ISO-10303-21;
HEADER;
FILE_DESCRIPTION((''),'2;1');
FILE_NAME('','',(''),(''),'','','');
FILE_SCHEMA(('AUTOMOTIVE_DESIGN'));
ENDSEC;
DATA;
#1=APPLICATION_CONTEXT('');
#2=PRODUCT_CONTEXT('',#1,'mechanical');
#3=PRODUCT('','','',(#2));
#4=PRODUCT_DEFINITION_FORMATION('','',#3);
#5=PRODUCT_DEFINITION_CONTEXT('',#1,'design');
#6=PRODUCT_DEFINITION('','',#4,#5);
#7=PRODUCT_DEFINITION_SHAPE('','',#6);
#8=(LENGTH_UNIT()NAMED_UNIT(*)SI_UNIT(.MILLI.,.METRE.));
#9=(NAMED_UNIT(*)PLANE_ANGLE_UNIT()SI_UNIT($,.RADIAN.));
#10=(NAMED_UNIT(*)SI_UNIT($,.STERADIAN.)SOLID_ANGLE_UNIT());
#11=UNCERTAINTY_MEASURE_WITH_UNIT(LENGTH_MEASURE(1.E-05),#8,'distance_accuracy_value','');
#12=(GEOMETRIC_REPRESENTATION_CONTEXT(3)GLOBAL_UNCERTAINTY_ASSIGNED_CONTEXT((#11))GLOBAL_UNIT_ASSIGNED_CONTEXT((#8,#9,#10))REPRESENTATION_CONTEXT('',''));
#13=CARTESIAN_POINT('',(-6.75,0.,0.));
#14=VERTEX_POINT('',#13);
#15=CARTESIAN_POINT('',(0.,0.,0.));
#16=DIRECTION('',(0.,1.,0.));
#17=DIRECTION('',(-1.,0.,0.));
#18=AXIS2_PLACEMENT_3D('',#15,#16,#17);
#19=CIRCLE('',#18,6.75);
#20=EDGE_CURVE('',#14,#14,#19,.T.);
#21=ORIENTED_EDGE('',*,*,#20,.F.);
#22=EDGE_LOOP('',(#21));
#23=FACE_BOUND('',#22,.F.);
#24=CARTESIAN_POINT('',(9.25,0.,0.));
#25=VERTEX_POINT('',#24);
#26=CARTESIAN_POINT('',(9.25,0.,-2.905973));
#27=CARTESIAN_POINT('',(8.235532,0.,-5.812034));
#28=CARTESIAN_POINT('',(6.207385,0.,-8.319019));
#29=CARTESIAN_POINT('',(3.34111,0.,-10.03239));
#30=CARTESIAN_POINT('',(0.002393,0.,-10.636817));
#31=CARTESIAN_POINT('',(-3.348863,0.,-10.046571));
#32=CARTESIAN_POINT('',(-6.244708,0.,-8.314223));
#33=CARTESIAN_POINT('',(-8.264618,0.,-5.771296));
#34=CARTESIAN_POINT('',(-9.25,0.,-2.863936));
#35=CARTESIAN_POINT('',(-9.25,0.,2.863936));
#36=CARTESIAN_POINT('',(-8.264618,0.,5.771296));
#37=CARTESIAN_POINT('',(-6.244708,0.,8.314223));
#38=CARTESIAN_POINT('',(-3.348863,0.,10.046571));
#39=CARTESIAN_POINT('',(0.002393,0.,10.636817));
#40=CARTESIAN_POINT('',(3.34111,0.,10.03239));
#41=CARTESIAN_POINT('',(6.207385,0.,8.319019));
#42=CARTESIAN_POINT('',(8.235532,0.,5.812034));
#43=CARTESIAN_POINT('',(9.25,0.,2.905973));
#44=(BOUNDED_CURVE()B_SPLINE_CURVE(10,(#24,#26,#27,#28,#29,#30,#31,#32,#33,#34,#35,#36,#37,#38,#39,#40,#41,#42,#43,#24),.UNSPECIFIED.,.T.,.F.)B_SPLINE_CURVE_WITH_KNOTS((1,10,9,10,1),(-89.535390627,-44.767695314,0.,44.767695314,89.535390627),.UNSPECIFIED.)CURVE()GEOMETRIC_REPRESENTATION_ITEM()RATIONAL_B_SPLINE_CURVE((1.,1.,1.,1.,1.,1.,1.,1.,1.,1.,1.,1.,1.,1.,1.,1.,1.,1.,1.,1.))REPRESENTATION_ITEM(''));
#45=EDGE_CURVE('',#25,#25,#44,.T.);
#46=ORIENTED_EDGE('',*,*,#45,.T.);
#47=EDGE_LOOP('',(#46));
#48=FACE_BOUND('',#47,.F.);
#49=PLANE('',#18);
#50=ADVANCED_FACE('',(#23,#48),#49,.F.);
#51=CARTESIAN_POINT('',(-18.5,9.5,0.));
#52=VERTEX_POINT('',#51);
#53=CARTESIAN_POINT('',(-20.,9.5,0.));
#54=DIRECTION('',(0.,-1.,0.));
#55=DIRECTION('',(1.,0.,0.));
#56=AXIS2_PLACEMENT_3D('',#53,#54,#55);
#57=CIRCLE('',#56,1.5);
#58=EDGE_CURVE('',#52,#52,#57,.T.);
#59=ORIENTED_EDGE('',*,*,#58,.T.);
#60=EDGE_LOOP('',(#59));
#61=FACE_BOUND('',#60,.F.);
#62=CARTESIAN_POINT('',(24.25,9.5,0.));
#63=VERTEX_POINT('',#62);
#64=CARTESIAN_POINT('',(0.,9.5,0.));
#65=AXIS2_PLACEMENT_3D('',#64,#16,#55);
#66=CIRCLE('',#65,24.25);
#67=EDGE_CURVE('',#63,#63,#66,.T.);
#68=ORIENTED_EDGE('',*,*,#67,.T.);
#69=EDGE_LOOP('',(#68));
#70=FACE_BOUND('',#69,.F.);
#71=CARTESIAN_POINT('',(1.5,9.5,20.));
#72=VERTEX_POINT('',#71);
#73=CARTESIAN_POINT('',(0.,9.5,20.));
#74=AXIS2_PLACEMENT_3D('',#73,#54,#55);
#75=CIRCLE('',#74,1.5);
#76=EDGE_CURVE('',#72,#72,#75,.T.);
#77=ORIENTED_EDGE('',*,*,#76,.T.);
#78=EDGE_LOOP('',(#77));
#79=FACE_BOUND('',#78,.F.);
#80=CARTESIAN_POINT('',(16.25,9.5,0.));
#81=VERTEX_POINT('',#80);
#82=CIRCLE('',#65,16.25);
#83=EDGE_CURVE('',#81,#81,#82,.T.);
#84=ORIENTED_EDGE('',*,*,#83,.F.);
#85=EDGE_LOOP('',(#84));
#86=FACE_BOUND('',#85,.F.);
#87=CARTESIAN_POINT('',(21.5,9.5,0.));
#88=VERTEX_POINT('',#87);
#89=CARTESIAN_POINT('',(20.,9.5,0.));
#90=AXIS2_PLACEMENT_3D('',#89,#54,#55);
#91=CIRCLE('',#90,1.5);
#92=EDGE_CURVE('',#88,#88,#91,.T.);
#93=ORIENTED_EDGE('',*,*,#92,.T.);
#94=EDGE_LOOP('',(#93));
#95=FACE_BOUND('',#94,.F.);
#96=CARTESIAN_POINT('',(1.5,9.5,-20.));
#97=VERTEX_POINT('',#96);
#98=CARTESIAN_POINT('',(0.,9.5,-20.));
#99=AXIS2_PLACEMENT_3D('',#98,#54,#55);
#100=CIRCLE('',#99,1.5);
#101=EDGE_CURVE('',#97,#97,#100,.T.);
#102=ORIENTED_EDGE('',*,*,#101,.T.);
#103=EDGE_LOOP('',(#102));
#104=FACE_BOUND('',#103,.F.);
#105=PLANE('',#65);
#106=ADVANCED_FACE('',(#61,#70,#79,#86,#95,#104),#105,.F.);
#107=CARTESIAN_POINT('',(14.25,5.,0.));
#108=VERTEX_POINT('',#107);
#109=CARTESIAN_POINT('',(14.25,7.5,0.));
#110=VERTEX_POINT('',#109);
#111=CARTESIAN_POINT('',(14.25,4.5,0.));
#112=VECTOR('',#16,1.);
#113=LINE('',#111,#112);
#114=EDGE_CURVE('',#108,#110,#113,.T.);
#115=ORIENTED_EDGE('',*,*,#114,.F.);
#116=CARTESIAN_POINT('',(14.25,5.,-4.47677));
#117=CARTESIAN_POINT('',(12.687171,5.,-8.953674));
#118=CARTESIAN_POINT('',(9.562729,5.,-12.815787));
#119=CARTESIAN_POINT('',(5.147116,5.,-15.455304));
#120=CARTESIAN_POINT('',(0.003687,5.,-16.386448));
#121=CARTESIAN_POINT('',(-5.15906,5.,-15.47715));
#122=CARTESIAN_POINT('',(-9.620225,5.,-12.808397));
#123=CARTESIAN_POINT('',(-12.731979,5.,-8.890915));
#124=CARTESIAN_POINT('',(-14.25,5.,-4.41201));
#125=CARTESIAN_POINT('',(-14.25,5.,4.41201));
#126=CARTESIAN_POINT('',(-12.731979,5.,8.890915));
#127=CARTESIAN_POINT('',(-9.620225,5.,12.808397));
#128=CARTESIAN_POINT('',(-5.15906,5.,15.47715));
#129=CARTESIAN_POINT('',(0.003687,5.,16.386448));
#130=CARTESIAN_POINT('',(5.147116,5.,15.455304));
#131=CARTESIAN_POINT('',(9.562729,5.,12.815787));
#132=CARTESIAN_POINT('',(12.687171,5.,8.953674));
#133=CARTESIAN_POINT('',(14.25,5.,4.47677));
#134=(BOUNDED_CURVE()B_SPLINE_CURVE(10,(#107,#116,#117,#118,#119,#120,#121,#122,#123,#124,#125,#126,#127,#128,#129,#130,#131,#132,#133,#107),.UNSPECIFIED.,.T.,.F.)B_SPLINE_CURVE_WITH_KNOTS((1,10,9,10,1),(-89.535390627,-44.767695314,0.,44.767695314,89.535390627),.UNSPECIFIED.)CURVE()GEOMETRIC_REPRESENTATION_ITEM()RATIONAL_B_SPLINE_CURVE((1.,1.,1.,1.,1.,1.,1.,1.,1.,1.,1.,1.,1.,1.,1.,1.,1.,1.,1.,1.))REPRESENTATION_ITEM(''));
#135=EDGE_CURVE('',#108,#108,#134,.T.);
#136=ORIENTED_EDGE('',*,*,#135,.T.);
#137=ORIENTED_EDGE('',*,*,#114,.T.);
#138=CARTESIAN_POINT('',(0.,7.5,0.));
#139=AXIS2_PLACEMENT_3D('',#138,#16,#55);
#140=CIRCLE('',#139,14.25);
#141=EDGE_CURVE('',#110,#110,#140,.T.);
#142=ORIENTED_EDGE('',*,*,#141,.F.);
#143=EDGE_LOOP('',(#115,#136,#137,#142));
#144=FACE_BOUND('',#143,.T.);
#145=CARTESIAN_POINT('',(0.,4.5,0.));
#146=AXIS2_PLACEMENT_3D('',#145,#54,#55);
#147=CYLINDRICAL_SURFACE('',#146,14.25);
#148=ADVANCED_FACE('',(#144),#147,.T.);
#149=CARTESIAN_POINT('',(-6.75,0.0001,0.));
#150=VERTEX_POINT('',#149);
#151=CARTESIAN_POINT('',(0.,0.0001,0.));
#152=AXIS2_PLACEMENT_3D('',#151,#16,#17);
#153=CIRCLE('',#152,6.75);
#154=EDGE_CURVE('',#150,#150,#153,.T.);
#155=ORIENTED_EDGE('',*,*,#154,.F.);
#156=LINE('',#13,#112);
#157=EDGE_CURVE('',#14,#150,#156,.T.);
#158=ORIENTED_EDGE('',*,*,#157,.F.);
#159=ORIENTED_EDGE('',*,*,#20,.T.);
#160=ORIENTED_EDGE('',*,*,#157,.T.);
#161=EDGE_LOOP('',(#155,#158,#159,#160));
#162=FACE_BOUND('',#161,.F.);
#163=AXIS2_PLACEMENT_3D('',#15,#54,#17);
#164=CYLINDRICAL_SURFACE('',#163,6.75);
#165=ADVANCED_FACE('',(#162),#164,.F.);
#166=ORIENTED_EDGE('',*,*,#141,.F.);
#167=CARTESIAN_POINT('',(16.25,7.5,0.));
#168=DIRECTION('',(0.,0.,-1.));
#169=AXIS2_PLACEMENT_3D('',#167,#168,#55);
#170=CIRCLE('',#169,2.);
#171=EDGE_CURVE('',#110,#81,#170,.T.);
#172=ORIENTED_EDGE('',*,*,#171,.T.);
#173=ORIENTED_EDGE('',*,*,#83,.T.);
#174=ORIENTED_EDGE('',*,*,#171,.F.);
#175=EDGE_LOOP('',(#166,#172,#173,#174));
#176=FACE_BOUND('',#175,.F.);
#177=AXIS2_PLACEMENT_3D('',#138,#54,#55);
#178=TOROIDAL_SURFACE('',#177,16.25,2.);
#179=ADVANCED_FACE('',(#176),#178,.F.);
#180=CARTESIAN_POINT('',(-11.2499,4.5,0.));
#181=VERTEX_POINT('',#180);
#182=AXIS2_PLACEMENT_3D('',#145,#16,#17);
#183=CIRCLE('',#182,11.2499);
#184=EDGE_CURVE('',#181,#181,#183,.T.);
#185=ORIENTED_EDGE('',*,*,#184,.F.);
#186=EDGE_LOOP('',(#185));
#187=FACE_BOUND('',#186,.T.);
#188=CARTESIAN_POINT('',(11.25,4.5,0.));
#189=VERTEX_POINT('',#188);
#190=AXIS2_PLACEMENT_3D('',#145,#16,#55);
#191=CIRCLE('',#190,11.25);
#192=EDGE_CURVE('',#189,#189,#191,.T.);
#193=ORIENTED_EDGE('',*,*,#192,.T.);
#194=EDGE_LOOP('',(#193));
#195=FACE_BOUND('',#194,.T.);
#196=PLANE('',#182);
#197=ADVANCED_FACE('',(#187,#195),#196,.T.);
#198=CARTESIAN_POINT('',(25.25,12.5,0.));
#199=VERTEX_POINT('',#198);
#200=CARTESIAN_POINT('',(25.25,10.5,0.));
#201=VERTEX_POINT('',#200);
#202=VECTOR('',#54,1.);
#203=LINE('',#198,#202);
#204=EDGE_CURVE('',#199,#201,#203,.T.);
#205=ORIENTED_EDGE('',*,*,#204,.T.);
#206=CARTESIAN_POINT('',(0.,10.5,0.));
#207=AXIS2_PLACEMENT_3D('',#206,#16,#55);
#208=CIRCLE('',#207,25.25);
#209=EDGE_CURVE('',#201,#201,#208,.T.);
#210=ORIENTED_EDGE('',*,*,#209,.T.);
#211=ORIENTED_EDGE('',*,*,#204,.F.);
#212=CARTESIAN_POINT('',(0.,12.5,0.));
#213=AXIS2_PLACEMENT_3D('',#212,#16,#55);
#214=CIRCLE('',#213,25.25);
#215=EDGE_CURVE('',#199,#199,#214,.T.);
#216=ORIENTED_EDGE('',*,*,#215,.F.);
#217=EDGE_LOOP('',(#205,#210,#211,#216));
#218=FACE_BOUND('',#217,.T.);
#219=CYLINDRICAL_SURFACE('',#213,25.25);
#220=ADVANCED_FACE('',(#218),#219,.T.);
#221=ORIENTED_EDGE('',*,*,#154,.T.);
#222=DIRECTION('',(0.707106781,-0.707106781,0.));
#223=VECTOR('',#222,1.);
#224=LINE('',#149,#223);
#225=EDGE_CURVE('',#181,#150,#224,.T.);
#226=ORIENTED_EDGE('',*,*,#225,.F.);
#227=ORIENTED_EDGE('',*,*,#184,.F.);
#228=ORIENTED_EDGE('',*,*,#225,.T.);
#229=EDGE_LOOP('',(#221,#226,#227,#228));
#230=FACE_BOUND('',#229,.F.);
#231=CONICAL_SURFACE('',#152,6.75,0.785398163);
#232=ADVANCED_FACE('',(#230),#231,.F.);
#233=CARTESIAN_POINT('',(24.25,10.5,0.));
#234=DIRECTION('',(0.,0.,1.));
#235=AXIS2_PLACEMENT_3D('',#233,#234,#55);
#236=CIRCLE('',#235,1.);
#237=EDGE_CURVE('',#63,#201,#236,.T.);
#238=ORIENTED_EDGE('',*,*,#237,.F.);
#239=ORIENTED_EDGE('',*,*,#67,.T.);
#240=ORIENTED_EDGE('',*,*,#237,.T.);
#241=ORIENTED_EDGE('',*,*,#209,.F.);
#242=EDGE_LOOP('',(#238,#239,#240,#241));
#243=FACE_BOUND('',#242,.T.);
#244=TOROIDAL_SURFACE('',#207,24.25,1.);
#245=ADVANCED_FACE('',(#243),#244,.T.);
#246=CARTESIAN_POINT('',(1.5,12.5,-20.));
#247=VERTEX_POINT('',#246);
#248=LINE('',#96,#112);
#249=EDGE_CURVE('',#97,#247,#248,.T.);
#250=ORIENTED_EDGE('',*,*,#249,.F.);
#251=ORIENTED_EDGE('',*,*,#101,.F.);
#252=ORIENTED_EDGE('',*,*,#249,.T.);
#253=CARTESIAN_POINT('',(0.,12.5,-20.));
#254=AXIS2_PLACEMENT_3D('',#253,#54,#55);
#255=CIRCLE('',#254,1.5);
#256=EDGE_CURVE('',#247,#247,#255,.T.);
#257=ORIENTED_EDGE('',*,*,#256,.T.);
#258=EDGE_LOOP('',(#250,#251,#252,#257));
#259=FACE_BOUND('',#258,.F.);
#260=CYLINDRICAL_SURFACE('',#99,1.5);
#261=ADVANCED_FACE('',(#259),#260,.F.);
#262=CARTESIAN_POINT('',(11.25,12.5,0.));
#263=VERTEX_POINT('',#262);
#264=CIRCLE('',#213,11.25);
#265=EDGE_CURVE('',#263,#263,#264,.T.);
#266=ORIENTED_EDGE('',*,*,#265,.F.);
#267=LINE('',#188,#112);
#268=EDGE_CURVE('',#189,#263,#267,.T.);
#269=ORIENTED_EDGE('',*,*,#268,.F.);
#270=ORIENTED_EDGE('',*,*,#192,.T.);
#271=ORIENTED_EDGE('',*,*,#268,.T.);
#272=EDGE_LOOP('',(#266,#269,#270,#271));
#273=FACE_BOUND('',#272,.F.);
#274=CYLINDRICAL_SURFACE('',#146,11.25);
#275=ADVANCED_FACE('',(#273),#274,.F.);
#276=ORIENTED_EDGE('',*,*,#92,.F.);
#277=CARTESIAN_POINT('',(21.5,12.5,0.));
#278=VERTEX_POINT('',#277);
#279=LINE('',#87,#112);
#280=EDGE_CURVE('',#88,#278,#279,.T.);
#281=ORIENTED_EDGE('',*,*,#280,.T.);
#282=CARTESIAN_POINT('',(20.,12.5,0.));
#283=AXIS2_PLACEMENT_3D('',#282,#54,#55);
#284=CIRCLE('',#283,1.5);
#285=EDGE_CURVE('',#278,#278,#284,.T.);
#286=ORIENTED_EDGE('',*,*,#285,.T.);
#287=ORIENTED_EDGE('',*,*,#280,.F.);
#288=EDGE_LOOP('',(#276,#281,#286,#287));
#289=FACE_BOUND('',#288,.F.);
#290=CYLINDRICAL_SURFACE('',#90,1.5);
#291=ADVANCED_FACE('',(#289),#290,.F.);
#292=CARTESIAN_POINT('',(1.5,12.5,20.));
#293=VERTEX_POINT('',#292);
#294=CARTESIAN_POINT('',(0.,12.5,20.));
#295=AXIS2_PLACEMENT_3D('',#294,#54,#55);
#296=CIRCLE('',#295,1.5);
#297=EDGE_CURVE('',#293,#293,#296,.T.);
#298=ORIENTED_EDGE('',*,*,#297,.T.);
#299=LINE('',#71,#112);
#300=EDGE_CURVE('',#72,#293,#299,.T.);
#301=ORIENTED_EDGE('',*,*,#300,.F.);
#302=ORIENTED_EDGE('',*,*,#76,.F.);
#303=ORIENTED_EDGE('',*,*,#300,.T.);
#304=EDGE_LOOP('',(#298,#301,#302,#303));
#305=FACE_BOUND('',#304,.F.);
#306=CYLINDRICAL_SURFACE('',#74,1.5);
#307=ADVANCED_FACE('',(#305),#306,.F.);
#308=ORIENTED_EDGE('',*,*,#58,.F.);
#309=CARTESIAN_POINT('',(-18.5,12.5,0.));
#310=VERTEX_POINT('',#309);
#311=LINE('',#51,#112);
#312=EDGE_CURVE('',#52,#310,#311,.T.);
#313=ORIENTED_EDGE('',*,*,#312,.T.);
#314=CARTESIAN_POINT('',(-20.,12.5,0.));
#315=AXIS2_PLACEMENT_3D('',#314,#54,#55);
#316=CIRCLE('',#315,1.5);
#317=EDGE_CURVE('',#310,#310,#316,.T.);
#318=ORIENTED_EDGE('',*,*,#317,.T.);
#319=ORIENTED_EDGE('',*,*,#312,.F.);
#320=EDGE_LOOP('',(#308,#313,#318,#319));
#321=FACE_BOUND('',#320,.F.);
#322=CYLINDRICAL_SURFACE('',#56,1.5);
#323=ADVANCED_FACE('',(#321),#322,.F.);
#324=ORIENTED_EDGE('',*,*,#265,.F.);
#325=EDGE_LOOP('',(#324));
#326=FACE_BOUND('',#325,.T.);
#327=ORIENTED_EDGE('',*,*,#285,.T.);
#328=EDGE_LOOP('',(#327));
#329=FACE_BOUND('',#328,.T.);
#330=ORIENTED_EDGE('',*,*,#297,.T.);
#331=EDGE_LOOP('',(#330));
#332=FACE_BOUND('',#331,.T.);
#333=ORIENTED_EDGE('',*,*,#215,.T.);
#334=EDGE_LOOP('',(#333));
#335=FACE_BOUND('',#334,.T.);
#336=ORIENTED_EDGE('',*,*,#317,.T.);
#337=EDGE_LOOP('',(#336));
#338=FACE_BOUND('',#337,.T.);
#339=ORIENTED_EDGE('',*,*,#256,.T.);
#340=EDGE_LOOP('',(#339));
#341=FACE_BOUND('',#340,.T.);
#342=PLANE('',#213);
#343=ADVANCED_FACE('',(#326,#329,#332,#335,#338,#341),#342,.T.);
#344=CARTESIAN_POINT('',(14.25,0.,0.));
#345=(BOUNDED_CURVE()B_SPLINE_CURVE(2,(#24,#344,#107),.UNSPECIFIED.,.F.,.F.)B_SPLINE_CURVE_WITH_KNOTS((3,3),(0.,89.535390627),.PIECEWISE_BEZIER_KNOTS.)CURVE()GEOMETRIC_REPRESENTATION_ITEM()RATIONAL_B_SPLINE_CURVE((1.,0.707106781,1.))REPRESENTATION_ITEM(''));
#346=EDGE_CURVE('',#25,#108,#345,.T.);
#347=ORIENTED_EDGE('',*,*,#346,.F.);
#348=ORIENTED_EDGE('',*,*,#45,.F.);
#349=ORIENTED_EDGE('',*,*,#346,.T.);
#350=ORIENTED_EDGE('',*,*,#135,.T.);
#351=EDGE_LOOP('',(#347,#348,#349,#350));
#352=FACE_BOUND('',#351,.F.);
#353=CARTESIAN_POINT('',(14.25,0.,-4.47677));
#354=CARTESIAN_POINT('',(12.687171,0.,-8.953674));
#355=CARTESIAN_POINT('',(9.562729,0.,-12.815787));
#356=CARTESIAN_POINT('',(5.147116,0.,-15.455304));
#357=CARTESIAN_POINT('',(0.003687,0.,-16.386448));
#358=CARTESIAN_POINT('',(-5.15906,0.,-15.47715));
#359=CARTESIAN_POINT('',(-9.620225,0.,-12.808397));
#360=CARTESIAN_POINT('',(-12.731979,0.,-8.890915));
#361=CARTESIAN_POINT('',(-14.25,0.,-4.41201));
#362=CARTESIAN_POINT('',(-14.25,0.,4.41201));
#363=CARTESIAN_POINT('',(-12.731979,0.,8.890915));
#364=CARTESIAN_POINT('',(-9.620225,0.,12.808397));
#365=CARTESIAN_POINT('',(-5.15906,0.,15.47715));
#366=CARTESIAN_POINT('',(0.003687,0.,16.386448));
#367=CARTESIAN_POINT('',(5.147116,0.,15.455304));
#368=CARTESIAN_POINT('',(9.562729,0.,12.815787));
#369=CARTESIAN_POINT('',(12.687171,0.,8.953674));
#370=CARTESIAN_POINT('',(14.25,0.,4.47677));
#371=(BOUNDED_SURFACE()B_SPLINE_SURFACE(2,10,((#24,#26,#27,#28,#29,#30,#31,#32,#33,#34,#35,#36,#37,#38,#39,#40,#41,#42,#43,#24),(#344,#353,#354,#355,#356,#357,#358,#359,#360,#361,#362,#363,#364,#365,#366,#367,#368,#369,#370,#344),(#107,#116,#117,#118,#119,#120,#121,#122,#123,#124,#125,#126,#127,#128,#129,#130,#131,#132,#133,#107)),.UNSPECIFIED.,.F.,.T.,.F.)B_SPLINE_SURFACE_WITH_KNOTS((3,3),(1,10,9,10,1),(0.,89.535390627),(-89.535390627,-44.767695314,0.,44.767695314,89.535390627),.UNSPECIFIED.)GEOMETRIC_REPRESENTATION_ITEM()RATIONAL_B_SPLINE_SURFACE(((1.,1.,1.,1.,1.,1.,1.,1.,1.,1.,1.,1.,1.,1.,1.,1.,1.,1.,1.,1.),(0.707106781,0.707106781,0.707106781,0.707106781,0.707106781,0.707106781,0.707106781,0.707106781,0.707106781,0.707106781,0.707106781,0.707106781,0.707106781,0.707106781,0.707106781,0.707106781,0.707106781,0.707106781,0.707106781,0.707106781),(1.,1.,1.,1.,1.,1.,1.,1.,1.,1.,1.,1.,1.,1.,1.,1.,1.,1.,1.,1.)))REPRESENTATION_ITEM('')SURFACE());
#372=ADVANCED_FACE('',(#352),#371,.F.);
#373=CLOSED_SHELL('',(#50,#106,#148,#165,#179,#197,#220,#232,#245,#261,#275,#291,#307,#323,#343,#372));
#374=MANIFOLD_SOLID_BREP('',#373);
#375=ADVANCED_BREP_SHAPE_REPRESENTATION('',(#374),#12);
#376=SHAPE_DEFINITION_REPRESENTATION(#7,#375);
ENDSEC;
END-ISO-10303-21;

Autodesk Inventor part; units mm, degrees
ref_plane "YZ Plane" through (0, 0, 0) normal (1, 0, 0) x (0, 1, 0)
ref_plane "XZ Plane" through (0, 0, 0) normal (0, 1, 0) x (-1, 0, 0)
ref_plane "XY Plane" through (0, 0, 0) normal (0, 0, 1) x (1, 0, 0)
sketch "Sketch1" plane through (0, 0, 0) normal (0, 1, 0) x (-1, 0, 0)
  circle A0 centre (0, 0) radius 11.25
  circle A1 centre (0, 0) radius 14.25
  circle A2 centre (0, 0) radius 30
  circle A3 centre (0, 0) radius 6.75
  dimension "d0" = 22.5
  dimension "d1" = 28.5
  dimension "d2" = 60
  dimension "d3" = 13.5
extrude "Extrusion1" add sketch "Sketch1" along normal blind 4.5 contours A0 | A1
sketch "Sketch2" plane through (0, 4.5, 0) normal (0, 1, 0) x (1, 0, 0)
  circle A0 centre (0, 0) radius 14.25 projected
  circle A1 centre (0, 0) radius 11.25
  dimension "d6" = 22.5
extrude "Extrusion2" add sketch "Sketch2" along normal blind 8
sketch "Sketch3" plane through (0, 12.5, 0) normal (0, 1, 0) x (1, 0, 0)
  circle A0 centre (0, 0) radius 14.25 projected
  circle A1 centre (0, 0) radius 25.25
  dimension "d9" = 50.5
extrude "Extrusion3" add sketch "Sketch3" against normal blind 3
chamfer "Chamfer2" distance 4.5 angle 45 1 edges at (6.75, 4.5, 0)
fillet "Fillet1" radius 5 1 edges at (14.25, 0, 0)
fillet "Fillet2" radius 2 1 edges at (-14.25, 9.5, 0)
fillet "Fillet3" radius 1 1 edges at (-25.25, 9.5, 0)
sketch "Sketch5" plane through (0, 9.5, 0) normal (0, -1, 0) x (1, 0, 0)
  circle A0 centre (0, 0) radius 16.25 projected
  circle A1 centre (-20, 0) radius 1.5
  circle A2 centre (-20, 0) radius 3.75
  circle A3 centre (20, 0) radius 1.5
  circle A4 centre (0, -20) radius 1.5
  circle A5 centre (0, 20) radius 1.5
  dimension "d21" = 3
  dimension "d22" = 20
  dimension "d23" = 3
  dimension "d24" = 20
  dimension "d25" = 3
  dimension "d26" = 20
  dimension "d27" = 3
  dimension "d28" = 20
extrude "Extrusion4" cut sketch "Sketch5" against normal blind 11 contours A1 | A3 | A4 | A5
properties part number "supportoCuscinettoBasso"
